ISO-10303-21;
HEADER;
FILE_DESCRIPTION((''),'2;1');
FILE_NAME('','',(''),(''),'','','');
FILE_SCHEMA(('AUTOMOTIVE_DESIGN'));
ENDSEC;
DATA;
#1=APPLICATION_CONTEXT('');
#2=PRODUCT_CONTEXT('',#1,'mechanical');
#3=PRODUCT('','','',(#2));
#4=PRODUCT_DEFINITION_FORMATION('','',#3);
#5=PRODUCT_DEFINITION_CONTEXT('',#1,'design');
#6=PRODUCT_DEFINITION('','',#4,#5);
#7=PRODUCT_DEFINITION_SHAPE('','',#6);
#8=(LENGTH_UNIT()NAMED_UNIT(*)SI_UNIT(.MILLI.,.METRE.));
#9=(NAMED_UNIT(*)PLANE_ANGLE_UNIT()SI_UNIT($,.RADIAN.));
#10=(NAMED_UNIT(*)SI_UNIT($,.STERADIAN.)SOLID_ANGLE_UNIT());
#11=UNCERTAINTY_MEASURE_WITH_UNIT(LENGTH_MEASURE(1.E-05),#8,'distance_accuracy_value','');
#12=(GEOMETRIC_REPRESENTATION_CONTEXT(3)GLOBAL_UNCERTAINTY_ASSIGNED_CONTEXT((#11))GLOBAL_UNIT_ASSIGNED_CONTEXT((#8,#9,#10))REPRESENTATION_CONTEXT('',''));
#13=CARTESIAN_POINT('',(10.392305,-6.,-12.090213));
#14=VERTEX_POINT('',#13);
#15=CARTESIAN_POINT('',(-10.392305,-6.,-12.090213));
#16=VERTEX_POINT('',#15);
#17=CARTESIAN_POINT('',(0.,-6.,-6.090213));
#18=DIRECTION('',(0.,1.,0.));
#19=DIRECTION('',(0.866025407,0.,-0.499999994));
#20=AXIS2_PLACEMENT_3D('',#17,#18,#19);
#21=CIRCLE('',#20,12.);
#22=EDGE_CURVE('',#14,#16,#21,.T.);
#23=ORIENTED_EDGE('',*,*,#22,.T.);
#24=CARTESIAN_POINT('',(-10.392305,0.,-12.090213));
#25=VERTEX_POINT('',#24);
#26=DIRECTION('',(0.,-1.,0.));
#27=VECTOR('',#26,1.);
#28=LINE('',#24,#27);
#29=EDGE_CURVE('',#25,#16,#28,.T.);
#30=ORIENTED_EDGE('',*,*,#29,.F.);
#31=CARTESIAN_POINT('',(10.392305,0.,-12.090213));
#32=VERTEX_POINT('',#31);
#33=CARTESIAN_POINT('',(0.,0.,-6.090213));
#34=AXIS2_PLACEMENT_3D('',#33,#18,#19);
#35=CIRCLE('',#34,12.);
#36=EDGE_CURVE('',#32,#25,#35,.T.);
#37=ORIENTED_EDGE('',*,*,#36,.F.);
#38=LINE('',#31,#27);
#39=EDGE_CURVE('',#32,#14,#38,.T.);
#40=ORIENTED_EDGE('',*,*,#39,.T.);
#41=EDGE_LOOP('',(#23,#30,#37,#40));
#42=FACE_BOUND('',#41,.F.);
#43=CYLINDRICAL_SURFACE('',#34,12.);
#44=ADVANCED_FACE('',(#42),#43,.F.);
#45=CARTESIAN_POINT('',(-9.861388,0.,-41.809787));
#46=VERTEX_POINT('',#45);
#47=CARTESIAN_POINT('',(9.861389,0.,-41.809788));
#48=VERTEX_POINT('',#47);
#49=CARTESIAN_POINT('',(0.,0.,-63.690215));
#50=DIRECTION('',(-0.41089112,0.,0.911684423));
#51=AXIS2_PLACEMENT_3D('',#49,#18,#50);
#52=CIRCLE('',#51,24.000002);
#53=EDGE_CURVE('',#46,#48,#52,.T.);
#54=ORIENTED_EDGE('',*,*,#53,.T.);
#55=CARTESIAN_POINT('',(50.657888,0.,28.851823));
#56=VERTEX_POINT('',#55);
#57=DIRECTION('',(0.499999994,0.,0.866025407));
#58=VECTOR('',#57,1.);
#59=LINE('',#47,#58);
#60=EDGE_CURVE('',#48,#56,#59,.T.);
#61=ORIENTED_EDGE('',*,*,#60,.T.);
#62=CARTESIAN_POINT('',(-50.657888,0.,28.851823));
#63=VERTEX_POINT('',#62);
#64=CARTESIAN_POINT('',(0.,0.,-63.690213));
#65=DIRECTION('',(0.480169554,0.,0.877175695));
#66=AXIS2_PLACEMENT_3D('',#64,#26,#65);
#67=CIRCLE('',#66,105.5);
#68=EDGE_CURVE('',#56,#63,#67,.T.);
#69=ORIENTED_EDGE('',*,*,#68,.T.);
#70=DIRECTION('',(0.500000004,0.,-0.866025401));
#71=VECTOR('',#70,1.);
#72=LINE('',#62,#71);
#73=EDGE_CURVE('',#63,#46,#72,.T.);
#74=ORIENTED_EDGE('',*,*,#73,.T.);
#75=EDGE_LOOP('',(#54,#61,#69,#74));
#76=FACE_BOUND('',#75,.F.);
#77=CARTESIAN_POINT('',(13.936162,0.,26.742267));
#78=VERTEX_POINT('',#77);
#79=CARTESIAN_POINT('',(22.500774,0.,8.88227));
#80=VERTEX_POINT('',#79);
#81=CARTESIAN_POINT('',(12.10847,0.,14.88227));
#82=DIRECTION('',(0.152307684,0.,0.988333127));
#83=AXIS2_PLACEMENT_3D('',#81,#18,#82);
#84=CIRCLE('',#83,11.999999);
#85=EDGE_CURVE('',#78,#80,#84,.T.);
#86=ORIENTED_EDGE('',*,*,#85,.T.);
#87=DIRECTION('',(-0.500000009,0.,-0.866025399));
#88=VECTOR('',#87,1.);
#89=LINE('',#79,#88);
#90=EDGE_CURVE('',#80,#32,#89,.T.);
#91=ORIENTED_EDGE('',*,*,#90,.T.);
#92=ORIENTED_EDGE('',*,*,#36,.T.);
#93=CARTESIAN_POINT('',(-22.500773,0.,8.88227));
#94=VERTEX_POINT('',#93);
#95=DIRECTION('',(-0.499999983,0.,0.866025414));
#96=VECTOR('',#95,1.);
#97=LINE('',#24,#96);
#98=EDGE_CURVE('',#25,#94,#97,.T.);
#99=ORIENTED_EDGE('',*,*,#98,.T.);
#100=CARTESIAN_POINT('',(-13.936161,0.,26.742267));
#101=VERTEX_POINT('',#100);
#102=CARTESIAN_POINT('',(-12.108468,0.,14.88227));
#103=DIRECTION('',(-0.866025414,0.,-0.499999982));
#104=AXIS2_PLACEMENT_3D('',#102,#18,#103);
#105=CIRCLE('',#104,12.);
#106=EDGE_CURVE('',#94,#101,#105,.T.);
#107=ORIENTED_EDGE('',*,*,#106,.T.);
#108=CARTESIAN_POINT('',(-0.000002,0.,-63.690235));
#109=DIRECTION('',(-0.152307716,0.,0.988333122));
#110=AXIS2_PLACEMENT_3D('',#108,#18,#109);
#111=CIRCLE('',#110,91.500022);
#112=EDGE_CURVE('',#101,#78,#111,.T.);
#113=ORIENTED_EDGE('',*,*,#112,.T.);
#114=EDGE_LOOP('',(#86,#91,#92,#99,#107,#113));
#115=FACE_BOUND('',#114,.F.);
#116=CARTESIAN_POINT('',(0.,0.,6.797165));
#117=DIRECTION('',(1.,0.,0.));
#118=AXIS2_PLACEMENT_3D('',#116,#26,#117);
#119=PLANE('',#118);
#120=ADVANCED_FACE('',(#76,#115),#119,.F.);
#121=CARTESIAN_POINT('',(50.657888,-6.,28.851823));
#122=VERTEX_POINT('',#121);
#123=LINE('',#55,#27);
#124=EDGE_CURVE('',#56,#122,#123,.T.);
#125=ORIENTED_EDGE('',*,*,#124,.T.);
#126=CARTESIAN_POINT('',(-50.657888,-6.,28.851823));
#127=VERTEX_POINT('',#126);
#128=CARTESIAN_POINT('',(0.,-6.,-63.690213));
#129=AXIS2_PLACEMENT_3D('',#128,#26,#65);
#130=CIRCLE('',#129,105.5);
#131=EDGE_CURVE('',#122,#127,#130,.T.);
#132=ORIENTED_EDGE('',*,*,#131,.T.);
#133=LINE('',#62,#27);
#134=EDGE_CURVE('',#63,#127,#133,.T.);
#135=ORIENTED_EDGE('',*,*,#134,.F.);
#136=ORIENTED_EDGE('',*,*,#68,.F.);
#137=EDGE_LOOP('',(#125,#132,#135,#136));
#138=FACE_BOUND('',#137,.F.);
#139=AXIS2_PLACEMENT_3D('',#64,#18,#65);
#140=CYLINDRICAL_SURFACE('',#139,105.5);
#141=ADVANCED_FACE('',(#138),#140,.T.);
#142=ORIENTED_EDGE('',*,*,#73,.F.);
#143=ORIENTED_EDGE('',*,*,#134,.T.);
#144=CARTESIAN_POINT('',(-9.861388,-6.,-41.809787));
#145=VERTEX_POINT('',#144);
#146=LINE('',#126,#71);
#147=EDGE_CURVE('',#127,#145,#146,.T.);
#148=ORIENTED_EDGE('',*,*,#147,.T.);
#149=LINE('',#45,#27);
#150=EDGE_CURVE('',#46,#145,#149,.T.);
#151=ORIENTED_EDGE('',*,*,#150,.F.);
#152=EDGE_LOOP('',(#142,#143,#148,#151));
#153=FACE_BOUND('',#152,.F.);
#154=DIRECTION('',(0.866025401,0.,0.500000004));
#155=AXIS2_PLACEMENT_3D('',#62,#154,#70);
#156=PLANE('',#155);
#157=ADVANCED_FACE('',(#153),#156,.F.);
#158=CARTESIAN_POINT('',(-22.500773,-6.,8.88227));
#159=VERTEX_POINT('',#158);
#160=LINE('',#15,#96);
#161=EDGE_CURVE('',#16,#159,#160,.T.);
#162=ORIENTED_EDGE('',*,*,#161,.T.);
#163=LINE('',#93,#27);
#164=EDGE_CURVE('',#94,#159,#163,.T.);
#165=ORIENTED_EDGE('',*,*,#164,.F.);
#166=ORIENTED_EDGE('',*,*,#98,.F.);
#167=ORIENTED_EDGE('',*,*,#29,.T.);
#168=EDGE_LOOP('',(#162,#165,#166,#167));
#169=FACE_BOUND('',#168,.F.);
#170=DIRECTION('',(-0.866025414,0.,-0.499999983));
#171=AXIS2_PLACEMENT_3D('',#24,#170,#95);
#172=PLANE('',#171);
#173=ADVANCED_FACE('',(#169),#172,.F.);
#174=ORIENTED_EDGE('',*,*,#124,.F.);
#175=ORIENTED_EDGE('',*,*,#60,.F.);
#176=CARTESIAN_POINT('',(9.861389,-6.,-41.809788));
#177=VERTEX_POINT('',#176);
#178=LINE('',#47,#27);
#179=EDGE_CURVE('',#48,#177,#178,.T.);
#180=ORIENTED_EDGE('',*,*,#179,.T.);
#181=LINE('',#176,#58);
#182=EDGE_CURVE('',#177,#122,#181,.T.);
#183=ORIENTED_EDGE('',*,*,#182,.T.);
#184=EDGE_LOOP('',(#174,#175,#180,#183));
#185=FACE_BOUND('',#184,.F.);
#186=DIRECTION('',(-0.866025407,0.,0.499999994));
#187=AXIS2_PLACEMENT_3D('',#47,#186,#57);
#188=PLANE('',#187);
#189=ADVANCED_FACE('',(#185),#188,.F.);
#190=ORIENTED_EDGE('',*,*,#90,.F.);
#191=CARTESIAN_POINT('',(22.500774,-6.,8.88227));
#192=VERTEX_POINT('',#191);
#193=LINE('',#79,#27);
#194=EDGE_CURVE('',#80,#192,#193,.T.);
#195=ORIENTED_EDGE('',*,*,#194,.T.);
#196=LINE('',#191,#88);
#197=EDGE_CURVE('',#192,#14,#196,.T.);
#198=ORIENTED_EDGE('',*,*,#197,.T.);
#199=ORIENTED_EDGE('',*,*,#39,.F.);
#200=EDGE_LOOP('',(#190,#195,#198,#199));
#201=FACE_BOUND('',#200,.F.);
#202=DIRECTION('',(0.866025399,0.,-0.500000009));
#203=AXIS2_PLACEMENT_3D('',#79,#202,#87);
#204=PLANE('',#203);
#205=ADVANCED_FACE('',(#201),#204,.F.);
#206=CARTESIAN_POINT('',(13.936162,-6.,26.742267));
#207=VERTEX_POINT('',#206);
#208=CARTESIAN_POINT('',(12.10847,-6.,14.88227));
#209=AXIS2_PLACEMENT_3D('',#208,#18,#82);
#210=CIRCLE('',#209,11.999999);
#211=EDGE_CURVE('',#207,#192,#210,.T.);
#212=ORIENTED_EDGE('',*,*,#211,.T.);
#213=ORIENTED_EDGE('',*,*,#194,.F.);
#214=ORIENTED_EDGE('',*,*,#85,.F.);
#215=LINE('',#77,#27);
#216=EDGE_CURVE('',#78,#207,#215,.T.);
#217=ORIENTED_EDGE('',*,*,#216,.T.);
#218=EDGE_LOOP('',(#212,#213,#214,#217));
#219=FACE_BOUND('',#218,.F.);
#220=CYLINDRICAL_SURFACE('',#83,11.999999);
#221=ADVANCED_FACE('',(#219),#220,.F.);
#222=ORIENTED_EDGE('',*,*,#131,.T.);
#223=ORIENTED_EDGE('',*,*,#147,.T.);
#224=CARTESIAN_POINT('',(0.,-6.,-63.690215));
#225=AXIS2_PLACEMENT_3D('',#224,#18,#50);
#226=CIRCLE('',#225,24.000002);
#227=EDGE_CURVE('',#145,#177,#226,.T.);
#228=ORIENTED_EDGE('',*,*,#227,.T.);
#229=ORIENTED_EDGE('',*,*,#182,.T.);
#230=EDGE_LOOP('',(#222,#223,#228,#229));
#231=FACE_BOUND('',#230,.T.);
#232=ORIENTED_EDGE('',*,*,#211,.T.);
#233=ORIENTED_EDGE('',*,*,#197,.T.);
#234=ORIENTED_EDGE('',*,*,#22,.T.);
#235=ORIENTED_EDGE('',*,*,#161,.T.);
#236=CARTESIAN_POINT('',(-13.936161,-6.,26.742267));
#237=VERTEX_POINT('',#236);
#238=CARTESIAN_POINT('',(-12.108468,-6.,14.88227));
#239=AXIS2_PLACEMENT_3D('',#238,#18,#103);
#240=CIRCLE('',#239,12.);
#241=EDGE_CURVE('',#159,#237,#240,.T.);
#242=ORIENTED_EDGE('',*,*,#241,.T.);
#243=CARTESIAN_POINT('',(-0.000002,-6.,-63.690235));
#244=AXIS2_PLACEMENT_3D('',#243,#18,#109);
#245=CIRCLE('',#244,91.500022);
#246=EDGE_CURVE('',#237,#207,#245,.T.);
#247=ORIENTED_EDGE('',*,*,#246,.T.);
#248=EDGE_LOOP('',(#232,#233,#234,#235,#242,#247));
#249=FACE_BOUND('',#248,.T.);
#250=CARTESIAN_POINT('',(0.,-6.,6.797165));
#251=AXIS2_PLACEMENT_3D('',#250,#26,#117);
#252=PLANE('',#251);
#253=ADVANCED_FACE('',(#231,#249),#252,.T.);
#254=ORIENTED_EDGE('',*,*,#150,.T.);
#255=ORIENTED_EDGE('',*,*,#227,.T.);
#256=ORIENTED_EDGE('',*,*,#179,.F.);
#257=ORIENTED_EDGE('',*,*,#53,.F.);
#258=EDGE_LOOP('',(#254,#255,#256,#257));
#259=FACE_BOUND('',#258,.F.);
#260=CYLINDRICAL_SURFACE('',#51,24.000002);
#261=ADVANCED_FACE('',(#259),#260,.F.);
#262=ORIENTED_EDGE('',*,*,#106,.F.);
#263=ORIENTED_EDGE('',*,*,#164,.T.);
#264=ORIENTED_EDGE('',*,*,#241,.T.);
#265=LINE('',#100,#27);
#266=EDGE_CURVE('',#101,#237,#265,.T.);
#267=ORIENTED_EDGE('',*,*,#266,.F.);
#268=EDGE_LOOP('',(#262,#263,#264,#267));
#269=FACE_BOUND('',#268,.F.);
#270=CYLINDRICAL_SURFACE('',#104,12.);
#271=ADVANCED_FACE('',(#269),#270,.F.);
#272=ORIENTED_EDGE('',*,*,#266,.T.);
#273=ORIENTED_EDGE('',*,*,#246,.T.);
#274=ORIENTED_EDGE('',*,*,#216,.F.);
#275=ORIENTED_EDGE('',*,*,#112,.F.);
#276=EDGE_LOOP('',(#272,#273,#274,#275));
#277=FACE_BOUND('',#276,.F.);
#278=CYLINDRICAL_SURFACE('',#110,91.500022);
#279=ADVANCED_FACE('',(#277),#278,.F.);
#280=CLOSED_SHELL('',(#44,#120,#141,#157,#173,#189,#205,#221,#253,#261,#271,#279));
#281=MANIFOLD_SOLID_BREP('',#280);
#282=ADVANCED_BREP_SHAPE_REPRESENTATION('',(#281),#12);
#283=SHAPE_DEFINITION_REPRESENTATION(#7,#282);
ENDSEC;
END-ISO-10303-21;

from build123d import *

# Parameters (mm, degrees)
F1_DEPTH = 6


# Not quite as in the source:
# - ends of sketch curves that miss each other by under 0.0002 mm in the source are joined


with BuildPart() as f1:
    # F0 (on Front) → F1 (new body)
    with BuildSketch(Plane.XZ):
        with BuildLine():
            ThreePointArc((50.6578879007, 28.8518228186), (0, 41.809787), (-50.6578879007, 28.8518228186))
            Line((-50.6578879007, 28.8518228186), (-9.861388, -41.809787))
            ThreePointArc((-9.861388, -41.809787), (4.558e-07, -39.690213), (9.8613887008, -41.8097876638))
            Line((9.8613887008, -41.8097876638), (50.6578879007, 28.8518228186))
        make_face()
        with BuildLine():
            ThreePointArc((10.3923048841, -12.0902129331), (0, -18.090213), (-10.3923048841, -12.0902129331))
            Line((-10.3923048841, -12.0902129331), (-22.500773, 8.88227))
            ThreePointArc((-22.500773, 8.88227), (-22.9286788819, 20.0710113186), (-13.93616106, 26.7422673895))
            ThreePointArc((-13.93616106, 26.7422673895), (4.942e-07, 27.809787), (13.9361619582, 26.7422667287))
            ThreePointArc((13.9361619582, 26.7422667287), (22.92867999, 20.0710110932), (22.5007736341, 8.8822696339))
            Line((22.5007736341, 8.8822696339), (10.3923048841, -12.0902129331))
        make_face(mode=Mode.SUBTRACT)
    extrude(amount=F1_DEPTH)


solid = f1.part
